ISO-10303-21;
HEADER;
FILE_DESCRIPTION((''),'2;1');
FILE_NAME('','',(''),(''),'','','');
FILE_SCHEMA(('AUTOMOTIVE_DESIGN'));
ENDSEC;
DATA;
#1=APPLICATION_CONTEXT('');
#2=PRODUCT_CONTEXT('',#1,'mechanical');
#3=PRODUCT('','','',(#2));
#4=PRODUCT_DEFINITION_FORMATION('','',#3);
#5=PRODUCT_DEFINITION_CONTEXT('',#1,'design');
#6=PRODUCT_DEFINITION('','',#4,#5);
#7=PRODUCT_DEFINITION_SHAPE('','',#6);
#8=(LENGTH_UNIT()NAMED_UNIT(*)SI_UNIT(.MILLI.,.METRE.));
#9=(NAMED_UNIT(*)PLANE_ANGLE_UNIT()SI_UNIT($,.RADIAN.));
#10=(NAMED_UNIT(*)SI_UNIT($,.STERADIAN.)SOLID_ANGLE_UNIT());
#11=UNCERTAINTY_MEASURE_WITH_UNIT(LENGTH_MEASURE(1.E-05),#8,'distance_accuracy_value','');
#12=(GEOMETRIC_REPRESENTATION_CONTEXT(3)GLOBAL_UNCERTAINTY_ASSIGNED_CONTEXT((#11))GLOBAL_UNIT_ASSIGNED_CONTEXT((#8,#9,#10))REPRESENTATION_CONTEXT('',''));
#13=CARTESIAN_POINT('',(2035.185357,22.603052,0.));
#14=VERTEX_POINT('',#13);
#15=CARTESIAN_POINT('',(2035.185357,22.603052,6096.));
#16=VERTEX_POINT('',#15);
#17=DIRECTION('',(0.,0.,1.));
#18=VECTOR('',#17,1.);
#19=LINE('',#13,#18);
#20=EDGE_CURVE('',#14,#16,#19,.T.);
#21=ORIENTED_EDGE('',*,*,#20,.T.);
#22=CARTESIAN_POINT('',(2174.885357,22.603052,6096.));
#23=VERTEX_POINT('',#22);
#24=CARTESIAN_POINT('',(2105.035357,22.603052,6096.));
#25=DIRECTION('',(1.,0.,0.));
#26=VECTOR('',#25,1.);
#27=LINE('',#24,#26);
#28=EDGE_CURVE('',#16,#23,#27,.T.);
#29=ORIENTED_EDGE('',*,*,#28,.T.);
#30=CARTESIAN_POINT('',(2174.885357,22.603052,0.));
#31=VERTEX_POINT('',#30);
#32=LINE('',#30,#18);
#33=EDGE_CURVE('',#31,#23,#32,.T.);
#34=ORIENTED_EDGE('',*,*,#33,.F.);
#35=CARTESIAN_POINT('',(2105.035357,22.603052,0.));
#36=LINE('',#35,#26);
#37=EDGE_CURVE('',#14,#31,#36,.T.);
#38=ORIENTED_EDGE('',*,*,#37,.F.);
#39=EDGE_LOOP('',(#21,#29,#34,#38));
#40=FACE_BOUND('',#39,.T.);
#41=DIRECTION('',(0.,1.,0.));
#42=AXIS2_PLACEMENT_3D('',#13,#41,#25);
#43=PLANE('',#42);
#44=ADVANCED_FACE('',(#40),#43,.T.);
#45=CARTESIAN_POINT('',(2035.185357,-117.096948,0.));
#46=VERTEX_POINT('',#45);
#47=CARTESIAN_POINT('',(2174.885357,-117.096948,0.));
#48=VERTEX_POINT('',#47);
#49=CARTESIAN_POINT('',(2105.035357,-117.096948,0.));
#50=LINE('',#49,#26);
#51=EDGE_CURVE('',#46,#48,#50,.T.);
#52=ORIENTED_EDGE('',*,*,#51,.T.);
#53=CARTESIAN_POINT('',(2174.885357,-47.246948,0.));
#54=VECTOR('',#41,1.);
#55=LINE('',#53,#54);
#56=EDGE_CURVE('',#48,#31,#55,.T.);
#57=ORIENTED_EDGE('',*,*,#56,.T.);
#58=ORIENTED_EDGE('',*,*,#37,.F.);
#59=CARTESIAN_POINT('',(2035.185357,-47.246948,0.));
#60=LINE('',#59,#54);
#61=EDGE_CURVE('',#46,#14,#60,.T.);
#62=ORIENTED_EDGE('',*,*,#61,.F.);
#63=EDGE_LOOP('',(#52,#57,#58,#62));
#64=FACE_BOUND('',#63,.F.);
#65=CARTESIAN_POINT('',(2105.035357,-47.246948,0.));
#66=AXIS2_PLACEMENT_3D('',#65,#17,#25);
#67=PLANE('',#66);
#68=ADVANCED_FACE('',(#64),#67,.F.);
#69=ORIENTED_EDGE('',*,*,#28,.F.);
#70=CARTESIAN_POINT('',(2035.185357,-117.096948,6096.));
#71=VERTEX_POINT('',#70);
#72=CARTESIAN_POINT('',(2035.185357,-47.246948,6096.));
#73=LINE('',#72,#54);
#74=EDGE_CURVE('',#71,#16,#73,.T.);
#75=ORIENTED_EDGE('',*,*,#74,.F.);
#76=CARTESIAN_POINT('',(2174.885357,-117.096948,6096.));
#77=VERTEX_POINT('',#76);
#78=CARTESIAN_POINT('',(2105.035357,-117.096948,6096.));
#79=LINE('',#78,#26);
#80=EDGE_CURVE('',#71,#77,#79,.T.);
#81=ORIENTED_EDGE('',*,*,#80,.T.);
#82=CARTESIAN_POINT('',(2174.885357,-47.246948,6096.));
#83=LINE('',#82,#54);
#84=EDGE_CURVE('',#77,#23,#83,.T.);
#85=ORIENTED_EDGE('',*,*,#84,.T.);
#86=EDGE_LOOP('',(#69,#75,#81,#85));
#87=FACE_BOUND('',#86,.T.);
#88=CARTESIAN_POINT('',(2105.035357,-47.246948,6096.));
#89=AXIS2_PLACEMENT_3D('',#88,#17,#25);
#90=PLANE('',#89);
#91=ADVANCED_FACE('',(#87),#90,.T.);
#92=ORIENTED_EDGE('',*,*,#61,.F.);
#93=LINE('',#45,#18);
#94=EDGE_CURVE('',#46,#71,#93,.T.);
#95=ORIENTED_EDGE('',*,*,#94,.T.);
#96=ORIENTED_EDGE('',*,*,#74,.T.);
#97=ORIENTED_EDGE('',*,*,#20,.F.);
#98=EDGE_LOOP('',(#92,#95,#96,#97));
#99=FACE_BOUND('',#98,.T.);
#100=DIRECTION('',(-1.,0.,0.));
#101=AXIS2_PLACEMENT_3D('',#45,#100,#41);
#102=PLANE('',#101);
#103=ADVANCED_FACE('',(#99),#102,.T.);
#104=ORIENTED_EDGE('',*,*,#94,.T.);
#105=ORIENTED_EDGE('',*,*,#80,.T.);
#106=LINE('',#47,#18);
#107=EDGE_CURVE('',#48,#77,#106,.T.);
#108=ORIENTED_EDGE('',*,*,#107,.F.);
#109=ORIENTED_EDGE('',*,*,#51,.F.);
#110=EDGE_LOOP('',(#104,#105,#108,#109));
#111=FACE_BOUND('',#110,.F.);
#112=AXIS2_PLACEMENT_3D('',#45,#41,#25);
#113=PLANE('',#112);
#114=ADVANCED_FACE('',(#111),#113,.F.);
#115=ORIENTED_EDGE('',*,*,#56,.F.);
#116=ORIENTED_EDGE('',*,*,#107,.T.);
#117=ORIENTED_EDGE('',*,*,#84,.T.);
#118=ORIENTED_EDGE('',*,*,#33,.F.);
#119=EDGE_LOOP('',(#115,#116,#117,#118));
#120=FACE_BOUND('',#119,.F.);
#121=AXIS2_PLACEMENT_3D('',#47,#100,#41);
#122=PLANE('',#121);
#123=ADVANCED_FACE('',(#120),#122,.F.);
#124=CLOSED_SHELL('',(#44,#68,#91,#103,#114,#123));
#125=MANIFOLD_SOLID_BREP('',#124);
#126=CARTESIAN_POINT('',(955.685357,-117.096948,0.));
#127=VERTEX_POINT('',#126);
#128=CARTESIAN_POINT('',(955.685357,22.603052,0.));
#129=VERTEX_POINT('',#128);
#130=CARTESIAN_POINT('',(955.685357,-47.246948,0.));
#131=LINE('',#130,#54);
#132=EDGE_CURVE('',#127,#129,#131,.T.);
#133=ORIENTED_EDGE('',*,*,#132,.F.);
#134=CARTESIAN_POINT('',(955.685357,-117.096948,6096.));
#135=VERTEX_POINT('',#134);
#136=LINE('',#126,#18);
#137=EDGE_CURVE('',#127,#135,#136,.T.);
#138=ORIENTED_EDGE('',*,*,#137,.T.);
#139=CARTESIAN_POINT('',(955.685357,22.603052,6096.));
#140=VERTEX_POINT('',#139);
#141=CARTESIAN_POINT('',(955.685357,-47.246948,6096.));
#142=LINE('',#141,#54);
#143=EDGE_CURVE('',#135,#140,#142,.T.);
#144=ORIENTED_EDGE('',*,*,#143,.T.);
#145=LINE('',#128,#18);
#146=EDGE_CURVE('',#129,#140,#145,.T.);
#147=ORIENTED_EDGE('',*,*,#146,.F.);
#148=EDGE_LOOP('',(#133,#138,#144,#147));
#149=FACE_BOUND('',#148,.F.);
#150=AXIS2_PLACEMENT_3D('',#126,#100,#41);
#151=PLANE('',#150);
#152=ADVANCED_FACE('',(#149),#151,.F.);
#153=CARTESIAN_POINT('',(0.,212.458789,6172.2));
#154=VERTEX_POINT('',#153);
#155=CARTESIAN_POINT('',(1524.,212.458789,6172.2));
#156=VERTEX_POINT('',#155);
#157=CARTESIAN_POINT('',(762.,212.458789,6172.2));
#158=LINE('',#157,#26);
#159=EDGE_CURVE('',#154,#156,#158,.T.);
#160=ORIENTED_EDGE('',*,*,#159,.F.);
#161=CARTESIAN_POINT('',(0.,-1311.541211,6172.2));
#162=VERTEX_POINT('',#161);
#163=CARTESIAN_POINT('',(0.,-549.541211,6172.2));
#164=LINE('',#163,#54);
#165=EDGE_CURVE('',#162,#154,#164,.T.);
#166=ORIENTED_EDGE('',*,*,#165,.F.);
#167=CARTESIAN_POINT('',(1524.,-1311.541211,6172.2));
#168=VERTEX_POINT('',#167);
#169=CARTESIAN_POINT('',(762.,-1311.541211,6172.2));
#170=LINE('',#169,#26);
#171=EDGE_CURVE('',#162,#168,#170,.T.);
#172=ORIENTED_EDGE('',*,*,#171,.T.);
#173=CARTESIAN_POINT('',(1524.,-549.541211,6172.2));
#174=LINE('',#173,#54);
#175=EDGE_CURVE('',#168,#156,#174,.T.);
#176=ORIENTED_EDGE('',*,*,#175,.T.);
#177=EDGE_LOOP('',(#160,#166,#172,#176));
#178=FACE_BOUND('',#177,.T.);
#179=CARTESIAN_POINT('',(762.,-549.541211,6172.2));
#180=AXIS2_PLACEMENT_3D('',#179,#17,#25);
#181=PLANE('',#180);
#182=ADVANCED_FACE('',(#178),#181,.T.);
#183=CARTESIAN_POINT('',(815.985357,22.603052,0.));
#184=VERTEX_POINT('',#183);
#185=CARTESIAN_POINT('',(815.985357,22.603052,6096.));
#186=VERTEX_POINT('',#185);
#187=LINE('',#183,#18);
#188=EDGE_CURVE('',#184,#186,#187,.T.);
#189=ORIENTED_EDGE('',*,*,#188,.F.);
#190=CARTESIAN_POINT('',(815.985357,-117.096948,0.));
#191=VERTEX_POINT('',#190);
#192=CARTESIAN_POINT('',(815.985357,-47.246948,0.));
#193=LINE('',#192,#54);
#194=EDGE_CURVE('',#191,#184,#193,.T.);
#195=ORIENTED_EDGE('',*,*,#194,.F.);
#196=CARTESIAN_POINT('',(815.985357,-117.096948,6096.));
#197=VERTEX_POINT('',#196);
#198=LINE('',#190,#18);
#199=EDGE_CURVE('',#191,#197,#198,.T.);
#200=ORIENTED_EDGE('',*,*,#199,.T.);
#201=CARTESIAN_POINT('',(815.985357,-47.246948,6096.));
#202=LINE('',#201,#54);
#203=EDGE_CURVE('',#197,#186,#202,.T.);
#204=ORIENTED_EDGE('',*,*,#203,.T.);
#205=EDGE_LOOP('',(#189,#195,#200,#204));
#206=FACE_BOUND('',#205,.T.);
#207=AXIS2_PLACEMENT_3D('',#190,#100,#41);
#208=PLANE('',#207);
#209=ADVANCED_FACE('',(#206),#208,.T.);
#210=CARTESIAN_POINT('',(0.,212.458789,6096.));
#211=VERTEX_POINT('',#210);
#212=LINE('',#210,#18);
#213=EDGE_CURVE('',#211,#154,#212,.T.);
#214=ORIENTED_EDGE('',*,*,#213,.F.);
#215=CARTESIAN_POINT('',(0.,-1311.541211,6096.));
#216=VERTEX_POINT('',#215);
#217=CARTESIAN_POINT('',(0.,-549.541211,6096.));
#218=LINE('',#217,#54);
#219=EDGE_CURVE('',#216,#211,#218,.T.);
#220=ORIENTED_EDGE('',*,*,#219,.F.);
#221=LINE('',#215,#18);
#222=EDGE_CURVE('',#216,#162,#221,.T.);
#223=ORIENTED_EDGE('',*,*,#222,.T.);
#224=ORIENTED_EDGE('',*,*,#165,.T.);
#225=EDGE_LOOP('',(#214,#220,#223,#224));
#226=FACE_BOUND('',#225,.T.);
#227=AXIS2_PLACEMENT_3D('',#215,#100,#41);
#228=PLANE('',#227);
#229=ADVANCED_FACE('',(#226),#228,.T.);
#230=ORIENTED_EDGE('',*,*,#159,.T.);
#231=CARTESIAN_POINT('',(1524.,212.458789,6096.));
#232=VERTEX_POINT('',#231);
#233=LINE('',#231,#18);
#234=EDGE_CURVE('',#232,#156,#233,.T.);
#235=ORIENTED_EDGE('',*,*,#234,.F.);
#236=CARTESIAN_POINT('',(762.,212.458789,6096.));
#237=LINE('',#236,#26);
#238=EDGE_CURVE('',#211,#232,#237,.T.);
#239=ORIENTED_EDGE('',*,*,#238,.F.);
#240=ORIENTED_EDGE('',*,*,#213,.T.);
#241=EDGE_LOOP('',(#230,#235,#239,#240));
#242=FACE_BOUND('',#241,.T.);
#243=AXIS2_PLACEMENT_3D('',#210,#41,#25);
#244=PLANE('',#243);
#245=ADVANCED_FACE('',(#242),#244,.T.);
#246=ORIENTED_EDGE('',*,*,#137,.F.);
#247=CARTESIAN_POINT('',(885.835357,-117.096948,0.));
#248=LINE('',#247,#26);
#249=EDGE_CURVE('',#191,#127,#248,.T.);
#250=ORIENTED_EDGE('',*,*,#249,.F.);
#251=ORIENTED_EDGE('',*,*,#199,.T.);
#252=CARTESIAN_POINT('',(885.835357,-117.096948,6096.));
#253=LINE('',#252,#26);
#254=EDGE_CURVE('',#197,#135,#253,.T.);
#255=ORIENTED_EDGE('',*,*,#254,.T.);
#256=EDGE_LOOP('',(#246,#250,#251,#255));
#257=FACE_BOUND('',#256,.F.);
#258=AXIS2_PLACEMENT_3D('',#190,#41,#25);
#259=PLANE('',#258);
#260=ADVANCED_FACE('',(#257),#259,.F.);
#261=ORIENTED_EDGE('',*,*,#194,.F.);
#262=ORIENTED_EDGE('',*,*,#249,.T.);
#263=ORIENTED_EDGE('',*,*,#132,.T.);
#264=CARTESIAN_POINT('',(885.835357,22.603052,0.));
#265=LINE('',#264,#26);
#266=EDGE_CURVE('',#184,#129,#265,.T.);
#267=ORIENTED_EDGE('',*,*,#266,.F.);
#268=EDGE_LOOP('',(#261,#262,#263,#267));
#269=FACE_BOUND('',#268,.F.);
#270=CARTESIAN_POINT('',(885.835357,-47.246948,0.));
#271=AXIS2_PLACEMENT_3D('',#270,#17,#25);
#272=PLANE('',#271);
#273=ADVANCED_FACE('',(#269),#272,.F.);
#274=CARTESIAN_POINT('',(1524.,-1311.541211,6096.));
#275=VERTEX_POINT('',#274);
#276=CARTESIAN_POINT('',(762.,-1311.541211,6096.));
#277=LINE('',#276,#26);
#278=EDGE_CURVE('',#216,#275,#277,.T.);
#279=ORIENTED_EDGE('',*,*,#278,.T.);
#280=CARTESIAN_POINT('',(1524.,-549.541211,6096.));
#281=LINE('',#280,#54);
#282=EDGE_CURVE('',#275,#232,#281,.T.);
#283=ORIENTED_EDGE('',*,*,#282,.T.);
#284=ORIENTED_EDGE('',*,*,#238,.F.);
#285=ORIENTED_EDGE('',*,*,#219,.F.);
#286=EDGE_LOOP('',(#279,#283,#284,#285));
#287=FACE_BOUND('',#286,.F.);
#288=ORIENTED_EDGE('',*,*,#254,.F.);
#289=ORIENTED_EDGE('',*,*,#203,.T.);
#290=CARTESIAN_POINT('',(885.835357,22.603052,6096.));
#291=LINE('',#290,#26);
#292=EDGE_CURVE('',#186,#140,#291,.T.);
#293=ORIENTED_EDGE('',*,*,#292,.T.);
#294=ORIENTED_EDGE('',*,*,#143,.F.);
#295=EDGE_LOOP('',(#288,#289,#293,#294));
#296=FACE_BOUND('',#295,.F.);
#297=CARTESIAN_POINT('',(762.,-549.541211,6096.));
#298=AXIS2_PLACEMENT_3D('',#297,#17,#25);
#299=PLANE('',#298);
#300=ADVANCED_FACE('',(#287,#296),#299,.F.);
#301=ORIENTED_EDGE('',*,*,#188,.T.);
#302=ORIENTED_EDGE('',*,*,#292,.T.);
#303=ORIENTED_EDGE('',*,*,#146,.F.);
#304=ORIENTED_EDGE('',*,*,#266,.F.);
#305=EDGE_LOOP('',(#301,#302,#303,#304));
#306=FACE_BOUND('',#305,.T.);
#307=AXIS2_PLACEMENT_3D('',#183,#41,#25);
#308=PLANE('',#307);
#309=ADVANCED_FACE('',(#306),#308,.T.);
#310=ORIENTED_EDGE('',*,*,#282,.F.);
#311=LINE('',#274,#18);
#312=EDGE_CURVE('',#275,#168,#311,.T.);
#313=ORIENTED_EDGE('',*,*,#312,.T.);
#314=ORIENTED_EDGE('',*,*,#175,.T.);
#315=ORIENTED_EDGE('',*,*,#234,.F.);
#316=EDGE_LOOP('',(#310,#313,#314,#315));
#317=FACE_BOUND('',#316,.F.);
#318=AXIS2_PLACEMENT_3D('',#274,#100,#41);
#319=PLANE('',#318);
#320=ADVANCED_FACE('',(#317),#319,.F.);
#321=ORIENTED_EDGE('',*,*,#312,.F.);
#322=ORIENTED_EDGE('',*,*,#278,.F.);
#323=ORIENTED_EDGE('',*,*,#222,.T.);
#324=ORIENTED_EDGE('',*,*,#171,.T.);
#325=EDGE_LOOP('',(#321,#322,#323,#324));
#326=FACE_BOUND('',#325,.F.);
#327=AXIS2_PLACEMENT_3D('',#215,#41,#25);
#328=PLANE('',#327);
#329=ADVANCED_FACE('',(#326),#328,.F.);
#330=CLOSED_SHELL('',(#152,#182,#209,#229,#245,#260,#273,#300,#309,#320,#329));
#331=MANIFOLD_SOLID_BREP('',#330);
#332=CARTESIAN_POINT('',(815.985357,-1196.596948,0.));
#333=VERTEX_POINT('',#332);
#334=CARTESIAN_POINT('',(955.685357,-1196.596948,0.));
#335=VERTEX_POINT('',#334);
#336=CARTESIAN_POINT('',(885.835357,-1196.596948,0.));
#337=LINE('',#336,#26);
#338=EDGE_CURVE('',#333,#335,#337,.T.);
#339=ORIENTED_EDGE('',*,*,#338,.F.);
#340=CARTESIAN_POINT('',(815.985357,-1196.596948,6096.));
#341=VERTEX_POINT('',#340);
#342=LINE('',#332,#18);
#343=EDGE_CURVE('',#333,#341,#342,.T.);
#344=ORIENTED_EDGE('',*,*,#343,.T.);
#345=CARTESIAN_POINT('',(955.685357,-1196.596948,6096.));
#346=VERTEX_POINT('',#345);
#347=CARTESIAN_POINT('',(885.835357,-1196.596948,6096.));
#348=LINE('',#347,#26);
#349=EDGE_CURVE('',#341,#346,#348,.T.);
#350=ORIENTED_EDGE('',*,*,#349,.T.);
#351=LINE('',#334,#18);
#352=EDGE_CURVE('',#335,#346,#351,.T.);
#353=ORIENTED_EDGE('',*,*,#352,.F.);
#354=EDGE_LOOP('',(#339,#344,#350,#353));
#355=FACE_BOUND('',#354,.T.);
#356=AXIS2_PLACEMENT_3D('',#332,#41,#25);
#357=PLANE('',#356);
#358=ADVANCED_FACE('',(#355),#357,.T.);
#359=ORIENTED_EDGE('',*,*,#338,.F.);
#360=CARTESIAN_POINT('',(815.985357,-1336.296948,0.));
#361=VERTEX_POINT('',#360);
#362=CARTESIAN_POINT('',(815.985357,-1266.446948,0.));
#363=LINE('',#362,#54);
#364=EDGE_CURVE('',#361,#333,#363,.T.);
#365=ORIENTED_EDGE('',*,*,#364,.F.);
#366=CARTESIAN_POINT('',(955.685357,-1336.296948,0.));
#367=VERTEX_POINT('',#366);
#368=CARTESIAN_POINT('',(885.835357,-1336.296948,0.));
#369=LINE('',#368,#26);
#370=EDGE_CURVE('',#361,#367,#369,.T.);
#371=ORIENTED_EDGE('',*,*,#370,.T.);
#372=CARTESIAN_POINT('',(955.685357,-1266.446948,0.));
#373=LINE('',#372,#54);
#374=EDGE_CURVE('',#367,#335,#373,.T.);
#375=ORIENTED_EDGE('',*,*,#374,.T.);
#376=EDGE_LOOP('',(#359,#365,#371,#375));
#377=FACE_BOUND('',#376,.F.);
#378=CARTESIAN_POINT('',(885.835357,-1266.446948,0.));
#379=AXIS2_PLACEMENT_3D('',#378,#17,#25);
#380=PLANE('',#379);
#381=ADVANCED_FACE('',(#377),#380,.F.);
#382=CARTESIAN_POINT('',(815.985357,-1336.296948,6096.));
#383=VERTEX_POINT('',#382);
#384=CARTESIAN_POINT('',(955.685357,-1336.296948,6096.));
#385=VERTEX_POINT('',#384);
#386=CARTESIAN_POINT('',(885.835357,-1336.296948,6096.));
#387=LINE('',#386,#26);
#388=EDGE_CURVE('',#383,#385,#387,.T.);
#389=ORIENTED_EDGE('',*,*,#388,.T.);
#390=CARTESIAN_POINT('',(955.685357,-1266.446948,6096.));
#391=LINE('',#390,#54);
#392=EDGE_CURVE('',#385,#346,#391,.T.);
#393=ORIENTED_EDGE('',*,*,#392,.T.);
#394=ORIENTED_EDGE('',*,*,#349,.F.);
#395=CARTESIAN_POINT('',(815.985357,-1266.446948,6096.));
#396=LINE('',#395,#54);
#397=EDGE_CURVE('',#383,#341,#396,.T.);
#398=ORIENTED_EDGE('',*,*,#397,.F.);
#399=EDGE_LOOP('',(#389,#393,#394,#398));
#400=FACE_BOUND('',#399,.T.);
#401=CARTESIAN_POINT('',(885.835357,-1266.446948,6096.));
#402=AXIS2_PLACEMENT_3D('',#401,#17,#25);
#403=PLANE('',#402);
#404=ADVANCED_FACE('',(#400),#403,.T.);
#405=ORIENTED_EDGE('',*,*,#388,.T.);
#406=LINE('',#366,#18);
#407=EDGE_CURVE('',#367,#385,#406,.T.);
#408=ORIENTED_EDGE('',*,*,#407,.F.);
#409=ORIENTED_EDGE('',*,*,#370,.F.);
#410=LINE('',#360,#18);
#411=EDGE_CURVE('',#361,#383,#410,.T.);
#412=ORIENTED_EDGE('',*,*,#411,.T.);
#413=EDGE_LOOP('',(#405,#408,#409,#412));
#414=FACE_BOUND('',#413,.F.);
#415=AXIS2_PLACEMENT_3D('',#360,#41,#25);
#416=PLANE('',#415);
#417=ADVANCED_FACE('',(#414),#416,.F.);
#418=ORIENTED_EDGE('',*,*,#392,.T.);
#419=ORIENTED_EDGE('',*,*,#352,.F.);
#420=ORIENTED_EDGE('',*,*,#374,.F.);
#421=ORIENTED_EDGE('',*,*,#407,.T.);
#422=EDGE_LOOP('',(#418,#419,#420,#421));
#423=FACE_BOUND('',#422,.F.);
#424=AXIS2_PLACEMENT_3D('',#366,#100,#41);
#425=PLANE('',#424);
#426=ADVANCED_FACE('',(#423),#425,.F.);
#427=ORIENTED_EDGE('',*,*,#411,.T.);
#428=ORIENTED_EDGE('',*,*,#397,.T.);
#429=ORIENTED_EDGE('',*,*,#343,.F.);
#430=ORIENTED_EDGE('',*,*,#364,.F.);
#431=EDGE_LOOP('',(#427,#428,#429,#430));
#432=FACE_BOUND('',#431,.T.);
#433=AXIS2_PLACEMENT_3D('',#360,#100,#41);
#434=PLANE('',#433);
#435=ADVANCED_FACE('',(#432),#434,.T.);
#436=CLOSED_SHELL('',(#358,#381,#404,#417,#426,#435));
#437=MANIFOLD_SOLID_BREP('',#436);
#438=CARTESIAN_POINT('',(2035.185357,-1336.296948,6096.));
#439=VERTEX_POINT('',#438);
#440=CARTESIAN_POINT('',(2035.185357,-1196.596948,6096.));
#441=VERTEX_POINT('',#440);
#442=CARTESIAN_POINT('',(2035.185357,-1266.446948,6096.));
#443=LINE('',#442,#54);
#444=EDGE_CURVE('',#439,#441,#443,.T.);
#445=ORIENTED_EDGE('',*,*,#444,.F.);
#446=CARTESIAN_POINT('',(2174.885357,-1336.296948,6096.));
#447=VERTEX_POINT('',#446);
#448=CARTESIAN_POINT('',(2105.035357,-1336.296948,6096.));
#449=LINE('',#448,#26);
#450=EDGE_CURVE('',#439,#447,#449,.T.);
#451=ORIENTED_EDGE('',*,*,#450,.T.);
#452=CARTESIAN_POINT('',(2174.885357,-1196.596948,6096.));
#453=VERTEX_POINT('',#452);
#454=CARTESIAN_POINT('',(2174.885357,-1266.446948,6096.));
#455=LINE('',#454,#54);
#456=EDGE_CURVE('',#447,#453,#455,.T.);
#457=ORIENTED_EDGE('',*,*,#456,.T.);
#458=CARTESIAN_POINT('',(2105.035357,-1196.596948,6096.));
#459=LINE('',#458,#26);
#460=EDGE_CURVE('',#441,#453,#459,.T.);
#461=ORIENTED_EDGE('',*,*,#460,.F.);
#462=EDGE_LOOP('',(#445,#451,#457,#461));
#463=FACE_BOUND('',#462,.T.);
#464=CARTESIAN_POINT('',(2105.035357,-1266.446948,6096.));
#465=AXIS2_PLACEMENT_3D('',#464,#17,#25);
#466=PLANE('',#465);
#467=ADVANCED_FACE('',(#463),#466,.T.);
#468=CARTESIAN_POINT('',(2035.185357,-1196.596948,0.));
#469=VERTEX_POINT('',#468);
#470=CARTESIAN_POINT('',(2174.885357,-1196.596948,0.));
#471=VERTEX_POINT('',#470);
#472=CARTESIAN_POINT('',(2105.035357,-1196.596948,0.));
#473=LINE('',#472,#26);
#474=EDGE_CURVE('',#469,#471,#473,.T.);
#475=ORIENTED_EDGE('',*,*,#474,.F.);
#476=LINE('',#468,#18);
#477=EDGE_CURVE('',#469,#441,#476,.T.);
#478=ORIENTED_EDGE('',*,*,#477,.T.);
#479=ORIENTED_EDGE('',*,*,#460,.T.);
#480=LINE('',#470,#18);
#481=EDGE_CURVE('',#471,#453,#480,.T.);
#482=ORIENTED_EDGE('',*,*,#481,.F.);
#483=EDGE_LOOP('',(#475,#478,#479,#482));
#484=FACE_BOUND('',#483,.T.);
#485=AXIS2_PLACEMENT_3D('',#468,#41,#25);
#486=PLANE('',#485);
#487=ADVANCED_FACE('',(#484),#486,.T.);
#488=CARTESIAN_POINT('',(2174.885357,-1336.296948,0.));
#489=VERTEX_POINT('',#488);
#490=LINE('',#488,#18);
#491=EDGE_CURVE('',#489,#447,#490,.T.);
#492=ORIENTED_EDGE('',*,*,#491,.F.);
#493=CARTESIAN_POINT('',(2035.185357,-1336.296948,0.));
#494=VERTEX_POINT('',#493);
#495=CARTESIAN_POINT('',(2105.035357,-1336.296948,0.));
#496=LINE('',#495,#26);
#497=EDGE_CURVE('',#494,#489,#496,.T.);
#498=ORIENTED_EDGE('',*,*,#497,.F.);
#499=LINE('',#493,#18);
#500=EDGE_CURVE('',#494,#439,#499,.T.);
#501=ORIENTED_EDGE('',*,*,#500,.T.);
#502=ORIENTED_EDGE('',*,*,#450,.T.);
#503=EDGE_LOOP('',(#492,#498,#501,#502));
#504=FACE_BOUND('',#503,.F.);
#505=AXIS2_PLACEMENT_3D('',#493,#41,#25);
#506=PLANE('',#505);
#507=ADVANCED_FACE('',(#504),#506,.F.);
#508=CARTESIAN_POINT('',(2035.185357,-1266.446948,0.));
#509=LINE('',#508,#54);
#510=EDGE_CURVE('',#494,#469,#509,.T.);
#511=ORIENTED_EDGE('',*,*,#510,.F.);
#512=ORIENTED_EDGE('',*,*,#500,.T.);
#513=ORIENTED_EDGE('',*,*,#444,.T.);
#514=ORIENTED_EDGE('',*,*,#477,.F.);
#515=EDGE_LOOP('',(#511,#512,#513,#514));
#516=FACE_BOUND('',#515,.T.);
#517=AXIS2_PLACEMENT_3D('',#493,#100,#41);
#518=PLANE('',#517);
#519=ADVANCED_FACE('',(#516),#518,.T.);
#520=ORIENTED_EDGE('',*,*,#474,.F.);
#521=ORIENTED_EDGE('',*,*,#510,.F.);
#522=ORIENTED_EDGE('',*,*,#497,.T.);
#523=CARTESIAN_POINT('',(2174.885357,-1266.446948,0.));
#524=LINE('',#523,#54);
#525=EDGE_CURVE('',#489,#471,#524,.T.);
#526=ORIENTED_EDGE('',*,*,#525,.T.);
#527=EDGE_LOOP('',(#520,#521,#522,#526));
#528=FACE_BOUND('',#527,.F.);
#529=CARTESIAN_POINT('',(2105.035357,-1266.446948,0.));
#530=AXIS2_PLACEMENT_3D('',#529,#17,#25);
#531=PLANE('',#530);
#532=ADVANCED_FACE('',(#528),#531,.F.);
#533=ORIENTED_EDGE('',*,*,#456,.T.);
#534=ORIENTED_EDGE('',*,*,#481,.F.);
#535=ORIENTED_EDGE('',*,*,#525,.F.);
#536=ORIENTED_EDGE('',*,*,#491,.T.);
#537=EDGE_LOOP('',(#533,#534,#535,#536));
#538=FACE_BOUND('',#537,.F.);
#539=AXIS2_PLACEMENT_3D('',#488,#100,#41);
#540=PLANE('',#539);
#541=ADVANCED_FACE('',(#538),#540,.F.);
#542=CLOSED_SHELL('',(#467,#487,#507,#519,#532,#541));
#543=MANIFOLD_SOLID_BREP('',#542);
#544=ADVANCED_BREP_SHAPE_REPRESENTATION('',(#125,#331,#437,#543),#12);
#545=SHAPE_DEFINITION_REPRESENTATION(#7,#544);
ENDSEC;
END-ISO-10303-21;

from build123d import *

# Parameters (mm, degrees)
F0_W     = 139.7
F0_H     = 139.7
F1_DEPTH = 6096
F2_W     = 1524
F2_H     = 1524
F3_DEPTH = 76.2


with BuildPart() as f1:
    # F0 (on Top) → F1 (new body)
    with BuildSketch(Plane.XY):
        with Locations((885.8353570938, -47.2469480515)):
            Rectangle(F0_W, F0_H)
    extrude(amount=F1_DEPTH)

    # F2 (on face) → F3 (join)
    with BuildSketch(Plane.XY.offset(6096)):
        with Locations((762, -549.5412114536)):
            Rectangle(F2_W, F2_H)
    extrude(amount=F3_DEPTH)


with BuildPart() as f1b:
    # F0 (on Top) → F1, piece 2 (new body)
    with BuildSketch(Plane.XY):
        with Locations((2105.0353570938, -47.2469480515)):
            Rectangle(F0_W, F0_H)
    extrude(amount=F1_DEPTH)


with BuildPart() as f1c:
    # F0 (on Top) → F1, piece 3 (new body)
    with BuildSketch(Plane.XY):
        with Locations((2105.0353570938, -1266.4469480515)):
            Rectangle(F0_W, F0_H)
    extrude(amount=F1_DEPTH)


with BuildPart() as f1d:
    # F0 (on Top) → F1, piece 4 (new body)
    with BuildSketch(Plane.XY):
        with Locations((885.8353570938, -1266.4469480515)):
            Rectangle(F0_W, F0_H)
    extrude(amount=F1_DEPTH)


solid = Compound([f1.part, f1b.part, f1c.part, f1d.part])
